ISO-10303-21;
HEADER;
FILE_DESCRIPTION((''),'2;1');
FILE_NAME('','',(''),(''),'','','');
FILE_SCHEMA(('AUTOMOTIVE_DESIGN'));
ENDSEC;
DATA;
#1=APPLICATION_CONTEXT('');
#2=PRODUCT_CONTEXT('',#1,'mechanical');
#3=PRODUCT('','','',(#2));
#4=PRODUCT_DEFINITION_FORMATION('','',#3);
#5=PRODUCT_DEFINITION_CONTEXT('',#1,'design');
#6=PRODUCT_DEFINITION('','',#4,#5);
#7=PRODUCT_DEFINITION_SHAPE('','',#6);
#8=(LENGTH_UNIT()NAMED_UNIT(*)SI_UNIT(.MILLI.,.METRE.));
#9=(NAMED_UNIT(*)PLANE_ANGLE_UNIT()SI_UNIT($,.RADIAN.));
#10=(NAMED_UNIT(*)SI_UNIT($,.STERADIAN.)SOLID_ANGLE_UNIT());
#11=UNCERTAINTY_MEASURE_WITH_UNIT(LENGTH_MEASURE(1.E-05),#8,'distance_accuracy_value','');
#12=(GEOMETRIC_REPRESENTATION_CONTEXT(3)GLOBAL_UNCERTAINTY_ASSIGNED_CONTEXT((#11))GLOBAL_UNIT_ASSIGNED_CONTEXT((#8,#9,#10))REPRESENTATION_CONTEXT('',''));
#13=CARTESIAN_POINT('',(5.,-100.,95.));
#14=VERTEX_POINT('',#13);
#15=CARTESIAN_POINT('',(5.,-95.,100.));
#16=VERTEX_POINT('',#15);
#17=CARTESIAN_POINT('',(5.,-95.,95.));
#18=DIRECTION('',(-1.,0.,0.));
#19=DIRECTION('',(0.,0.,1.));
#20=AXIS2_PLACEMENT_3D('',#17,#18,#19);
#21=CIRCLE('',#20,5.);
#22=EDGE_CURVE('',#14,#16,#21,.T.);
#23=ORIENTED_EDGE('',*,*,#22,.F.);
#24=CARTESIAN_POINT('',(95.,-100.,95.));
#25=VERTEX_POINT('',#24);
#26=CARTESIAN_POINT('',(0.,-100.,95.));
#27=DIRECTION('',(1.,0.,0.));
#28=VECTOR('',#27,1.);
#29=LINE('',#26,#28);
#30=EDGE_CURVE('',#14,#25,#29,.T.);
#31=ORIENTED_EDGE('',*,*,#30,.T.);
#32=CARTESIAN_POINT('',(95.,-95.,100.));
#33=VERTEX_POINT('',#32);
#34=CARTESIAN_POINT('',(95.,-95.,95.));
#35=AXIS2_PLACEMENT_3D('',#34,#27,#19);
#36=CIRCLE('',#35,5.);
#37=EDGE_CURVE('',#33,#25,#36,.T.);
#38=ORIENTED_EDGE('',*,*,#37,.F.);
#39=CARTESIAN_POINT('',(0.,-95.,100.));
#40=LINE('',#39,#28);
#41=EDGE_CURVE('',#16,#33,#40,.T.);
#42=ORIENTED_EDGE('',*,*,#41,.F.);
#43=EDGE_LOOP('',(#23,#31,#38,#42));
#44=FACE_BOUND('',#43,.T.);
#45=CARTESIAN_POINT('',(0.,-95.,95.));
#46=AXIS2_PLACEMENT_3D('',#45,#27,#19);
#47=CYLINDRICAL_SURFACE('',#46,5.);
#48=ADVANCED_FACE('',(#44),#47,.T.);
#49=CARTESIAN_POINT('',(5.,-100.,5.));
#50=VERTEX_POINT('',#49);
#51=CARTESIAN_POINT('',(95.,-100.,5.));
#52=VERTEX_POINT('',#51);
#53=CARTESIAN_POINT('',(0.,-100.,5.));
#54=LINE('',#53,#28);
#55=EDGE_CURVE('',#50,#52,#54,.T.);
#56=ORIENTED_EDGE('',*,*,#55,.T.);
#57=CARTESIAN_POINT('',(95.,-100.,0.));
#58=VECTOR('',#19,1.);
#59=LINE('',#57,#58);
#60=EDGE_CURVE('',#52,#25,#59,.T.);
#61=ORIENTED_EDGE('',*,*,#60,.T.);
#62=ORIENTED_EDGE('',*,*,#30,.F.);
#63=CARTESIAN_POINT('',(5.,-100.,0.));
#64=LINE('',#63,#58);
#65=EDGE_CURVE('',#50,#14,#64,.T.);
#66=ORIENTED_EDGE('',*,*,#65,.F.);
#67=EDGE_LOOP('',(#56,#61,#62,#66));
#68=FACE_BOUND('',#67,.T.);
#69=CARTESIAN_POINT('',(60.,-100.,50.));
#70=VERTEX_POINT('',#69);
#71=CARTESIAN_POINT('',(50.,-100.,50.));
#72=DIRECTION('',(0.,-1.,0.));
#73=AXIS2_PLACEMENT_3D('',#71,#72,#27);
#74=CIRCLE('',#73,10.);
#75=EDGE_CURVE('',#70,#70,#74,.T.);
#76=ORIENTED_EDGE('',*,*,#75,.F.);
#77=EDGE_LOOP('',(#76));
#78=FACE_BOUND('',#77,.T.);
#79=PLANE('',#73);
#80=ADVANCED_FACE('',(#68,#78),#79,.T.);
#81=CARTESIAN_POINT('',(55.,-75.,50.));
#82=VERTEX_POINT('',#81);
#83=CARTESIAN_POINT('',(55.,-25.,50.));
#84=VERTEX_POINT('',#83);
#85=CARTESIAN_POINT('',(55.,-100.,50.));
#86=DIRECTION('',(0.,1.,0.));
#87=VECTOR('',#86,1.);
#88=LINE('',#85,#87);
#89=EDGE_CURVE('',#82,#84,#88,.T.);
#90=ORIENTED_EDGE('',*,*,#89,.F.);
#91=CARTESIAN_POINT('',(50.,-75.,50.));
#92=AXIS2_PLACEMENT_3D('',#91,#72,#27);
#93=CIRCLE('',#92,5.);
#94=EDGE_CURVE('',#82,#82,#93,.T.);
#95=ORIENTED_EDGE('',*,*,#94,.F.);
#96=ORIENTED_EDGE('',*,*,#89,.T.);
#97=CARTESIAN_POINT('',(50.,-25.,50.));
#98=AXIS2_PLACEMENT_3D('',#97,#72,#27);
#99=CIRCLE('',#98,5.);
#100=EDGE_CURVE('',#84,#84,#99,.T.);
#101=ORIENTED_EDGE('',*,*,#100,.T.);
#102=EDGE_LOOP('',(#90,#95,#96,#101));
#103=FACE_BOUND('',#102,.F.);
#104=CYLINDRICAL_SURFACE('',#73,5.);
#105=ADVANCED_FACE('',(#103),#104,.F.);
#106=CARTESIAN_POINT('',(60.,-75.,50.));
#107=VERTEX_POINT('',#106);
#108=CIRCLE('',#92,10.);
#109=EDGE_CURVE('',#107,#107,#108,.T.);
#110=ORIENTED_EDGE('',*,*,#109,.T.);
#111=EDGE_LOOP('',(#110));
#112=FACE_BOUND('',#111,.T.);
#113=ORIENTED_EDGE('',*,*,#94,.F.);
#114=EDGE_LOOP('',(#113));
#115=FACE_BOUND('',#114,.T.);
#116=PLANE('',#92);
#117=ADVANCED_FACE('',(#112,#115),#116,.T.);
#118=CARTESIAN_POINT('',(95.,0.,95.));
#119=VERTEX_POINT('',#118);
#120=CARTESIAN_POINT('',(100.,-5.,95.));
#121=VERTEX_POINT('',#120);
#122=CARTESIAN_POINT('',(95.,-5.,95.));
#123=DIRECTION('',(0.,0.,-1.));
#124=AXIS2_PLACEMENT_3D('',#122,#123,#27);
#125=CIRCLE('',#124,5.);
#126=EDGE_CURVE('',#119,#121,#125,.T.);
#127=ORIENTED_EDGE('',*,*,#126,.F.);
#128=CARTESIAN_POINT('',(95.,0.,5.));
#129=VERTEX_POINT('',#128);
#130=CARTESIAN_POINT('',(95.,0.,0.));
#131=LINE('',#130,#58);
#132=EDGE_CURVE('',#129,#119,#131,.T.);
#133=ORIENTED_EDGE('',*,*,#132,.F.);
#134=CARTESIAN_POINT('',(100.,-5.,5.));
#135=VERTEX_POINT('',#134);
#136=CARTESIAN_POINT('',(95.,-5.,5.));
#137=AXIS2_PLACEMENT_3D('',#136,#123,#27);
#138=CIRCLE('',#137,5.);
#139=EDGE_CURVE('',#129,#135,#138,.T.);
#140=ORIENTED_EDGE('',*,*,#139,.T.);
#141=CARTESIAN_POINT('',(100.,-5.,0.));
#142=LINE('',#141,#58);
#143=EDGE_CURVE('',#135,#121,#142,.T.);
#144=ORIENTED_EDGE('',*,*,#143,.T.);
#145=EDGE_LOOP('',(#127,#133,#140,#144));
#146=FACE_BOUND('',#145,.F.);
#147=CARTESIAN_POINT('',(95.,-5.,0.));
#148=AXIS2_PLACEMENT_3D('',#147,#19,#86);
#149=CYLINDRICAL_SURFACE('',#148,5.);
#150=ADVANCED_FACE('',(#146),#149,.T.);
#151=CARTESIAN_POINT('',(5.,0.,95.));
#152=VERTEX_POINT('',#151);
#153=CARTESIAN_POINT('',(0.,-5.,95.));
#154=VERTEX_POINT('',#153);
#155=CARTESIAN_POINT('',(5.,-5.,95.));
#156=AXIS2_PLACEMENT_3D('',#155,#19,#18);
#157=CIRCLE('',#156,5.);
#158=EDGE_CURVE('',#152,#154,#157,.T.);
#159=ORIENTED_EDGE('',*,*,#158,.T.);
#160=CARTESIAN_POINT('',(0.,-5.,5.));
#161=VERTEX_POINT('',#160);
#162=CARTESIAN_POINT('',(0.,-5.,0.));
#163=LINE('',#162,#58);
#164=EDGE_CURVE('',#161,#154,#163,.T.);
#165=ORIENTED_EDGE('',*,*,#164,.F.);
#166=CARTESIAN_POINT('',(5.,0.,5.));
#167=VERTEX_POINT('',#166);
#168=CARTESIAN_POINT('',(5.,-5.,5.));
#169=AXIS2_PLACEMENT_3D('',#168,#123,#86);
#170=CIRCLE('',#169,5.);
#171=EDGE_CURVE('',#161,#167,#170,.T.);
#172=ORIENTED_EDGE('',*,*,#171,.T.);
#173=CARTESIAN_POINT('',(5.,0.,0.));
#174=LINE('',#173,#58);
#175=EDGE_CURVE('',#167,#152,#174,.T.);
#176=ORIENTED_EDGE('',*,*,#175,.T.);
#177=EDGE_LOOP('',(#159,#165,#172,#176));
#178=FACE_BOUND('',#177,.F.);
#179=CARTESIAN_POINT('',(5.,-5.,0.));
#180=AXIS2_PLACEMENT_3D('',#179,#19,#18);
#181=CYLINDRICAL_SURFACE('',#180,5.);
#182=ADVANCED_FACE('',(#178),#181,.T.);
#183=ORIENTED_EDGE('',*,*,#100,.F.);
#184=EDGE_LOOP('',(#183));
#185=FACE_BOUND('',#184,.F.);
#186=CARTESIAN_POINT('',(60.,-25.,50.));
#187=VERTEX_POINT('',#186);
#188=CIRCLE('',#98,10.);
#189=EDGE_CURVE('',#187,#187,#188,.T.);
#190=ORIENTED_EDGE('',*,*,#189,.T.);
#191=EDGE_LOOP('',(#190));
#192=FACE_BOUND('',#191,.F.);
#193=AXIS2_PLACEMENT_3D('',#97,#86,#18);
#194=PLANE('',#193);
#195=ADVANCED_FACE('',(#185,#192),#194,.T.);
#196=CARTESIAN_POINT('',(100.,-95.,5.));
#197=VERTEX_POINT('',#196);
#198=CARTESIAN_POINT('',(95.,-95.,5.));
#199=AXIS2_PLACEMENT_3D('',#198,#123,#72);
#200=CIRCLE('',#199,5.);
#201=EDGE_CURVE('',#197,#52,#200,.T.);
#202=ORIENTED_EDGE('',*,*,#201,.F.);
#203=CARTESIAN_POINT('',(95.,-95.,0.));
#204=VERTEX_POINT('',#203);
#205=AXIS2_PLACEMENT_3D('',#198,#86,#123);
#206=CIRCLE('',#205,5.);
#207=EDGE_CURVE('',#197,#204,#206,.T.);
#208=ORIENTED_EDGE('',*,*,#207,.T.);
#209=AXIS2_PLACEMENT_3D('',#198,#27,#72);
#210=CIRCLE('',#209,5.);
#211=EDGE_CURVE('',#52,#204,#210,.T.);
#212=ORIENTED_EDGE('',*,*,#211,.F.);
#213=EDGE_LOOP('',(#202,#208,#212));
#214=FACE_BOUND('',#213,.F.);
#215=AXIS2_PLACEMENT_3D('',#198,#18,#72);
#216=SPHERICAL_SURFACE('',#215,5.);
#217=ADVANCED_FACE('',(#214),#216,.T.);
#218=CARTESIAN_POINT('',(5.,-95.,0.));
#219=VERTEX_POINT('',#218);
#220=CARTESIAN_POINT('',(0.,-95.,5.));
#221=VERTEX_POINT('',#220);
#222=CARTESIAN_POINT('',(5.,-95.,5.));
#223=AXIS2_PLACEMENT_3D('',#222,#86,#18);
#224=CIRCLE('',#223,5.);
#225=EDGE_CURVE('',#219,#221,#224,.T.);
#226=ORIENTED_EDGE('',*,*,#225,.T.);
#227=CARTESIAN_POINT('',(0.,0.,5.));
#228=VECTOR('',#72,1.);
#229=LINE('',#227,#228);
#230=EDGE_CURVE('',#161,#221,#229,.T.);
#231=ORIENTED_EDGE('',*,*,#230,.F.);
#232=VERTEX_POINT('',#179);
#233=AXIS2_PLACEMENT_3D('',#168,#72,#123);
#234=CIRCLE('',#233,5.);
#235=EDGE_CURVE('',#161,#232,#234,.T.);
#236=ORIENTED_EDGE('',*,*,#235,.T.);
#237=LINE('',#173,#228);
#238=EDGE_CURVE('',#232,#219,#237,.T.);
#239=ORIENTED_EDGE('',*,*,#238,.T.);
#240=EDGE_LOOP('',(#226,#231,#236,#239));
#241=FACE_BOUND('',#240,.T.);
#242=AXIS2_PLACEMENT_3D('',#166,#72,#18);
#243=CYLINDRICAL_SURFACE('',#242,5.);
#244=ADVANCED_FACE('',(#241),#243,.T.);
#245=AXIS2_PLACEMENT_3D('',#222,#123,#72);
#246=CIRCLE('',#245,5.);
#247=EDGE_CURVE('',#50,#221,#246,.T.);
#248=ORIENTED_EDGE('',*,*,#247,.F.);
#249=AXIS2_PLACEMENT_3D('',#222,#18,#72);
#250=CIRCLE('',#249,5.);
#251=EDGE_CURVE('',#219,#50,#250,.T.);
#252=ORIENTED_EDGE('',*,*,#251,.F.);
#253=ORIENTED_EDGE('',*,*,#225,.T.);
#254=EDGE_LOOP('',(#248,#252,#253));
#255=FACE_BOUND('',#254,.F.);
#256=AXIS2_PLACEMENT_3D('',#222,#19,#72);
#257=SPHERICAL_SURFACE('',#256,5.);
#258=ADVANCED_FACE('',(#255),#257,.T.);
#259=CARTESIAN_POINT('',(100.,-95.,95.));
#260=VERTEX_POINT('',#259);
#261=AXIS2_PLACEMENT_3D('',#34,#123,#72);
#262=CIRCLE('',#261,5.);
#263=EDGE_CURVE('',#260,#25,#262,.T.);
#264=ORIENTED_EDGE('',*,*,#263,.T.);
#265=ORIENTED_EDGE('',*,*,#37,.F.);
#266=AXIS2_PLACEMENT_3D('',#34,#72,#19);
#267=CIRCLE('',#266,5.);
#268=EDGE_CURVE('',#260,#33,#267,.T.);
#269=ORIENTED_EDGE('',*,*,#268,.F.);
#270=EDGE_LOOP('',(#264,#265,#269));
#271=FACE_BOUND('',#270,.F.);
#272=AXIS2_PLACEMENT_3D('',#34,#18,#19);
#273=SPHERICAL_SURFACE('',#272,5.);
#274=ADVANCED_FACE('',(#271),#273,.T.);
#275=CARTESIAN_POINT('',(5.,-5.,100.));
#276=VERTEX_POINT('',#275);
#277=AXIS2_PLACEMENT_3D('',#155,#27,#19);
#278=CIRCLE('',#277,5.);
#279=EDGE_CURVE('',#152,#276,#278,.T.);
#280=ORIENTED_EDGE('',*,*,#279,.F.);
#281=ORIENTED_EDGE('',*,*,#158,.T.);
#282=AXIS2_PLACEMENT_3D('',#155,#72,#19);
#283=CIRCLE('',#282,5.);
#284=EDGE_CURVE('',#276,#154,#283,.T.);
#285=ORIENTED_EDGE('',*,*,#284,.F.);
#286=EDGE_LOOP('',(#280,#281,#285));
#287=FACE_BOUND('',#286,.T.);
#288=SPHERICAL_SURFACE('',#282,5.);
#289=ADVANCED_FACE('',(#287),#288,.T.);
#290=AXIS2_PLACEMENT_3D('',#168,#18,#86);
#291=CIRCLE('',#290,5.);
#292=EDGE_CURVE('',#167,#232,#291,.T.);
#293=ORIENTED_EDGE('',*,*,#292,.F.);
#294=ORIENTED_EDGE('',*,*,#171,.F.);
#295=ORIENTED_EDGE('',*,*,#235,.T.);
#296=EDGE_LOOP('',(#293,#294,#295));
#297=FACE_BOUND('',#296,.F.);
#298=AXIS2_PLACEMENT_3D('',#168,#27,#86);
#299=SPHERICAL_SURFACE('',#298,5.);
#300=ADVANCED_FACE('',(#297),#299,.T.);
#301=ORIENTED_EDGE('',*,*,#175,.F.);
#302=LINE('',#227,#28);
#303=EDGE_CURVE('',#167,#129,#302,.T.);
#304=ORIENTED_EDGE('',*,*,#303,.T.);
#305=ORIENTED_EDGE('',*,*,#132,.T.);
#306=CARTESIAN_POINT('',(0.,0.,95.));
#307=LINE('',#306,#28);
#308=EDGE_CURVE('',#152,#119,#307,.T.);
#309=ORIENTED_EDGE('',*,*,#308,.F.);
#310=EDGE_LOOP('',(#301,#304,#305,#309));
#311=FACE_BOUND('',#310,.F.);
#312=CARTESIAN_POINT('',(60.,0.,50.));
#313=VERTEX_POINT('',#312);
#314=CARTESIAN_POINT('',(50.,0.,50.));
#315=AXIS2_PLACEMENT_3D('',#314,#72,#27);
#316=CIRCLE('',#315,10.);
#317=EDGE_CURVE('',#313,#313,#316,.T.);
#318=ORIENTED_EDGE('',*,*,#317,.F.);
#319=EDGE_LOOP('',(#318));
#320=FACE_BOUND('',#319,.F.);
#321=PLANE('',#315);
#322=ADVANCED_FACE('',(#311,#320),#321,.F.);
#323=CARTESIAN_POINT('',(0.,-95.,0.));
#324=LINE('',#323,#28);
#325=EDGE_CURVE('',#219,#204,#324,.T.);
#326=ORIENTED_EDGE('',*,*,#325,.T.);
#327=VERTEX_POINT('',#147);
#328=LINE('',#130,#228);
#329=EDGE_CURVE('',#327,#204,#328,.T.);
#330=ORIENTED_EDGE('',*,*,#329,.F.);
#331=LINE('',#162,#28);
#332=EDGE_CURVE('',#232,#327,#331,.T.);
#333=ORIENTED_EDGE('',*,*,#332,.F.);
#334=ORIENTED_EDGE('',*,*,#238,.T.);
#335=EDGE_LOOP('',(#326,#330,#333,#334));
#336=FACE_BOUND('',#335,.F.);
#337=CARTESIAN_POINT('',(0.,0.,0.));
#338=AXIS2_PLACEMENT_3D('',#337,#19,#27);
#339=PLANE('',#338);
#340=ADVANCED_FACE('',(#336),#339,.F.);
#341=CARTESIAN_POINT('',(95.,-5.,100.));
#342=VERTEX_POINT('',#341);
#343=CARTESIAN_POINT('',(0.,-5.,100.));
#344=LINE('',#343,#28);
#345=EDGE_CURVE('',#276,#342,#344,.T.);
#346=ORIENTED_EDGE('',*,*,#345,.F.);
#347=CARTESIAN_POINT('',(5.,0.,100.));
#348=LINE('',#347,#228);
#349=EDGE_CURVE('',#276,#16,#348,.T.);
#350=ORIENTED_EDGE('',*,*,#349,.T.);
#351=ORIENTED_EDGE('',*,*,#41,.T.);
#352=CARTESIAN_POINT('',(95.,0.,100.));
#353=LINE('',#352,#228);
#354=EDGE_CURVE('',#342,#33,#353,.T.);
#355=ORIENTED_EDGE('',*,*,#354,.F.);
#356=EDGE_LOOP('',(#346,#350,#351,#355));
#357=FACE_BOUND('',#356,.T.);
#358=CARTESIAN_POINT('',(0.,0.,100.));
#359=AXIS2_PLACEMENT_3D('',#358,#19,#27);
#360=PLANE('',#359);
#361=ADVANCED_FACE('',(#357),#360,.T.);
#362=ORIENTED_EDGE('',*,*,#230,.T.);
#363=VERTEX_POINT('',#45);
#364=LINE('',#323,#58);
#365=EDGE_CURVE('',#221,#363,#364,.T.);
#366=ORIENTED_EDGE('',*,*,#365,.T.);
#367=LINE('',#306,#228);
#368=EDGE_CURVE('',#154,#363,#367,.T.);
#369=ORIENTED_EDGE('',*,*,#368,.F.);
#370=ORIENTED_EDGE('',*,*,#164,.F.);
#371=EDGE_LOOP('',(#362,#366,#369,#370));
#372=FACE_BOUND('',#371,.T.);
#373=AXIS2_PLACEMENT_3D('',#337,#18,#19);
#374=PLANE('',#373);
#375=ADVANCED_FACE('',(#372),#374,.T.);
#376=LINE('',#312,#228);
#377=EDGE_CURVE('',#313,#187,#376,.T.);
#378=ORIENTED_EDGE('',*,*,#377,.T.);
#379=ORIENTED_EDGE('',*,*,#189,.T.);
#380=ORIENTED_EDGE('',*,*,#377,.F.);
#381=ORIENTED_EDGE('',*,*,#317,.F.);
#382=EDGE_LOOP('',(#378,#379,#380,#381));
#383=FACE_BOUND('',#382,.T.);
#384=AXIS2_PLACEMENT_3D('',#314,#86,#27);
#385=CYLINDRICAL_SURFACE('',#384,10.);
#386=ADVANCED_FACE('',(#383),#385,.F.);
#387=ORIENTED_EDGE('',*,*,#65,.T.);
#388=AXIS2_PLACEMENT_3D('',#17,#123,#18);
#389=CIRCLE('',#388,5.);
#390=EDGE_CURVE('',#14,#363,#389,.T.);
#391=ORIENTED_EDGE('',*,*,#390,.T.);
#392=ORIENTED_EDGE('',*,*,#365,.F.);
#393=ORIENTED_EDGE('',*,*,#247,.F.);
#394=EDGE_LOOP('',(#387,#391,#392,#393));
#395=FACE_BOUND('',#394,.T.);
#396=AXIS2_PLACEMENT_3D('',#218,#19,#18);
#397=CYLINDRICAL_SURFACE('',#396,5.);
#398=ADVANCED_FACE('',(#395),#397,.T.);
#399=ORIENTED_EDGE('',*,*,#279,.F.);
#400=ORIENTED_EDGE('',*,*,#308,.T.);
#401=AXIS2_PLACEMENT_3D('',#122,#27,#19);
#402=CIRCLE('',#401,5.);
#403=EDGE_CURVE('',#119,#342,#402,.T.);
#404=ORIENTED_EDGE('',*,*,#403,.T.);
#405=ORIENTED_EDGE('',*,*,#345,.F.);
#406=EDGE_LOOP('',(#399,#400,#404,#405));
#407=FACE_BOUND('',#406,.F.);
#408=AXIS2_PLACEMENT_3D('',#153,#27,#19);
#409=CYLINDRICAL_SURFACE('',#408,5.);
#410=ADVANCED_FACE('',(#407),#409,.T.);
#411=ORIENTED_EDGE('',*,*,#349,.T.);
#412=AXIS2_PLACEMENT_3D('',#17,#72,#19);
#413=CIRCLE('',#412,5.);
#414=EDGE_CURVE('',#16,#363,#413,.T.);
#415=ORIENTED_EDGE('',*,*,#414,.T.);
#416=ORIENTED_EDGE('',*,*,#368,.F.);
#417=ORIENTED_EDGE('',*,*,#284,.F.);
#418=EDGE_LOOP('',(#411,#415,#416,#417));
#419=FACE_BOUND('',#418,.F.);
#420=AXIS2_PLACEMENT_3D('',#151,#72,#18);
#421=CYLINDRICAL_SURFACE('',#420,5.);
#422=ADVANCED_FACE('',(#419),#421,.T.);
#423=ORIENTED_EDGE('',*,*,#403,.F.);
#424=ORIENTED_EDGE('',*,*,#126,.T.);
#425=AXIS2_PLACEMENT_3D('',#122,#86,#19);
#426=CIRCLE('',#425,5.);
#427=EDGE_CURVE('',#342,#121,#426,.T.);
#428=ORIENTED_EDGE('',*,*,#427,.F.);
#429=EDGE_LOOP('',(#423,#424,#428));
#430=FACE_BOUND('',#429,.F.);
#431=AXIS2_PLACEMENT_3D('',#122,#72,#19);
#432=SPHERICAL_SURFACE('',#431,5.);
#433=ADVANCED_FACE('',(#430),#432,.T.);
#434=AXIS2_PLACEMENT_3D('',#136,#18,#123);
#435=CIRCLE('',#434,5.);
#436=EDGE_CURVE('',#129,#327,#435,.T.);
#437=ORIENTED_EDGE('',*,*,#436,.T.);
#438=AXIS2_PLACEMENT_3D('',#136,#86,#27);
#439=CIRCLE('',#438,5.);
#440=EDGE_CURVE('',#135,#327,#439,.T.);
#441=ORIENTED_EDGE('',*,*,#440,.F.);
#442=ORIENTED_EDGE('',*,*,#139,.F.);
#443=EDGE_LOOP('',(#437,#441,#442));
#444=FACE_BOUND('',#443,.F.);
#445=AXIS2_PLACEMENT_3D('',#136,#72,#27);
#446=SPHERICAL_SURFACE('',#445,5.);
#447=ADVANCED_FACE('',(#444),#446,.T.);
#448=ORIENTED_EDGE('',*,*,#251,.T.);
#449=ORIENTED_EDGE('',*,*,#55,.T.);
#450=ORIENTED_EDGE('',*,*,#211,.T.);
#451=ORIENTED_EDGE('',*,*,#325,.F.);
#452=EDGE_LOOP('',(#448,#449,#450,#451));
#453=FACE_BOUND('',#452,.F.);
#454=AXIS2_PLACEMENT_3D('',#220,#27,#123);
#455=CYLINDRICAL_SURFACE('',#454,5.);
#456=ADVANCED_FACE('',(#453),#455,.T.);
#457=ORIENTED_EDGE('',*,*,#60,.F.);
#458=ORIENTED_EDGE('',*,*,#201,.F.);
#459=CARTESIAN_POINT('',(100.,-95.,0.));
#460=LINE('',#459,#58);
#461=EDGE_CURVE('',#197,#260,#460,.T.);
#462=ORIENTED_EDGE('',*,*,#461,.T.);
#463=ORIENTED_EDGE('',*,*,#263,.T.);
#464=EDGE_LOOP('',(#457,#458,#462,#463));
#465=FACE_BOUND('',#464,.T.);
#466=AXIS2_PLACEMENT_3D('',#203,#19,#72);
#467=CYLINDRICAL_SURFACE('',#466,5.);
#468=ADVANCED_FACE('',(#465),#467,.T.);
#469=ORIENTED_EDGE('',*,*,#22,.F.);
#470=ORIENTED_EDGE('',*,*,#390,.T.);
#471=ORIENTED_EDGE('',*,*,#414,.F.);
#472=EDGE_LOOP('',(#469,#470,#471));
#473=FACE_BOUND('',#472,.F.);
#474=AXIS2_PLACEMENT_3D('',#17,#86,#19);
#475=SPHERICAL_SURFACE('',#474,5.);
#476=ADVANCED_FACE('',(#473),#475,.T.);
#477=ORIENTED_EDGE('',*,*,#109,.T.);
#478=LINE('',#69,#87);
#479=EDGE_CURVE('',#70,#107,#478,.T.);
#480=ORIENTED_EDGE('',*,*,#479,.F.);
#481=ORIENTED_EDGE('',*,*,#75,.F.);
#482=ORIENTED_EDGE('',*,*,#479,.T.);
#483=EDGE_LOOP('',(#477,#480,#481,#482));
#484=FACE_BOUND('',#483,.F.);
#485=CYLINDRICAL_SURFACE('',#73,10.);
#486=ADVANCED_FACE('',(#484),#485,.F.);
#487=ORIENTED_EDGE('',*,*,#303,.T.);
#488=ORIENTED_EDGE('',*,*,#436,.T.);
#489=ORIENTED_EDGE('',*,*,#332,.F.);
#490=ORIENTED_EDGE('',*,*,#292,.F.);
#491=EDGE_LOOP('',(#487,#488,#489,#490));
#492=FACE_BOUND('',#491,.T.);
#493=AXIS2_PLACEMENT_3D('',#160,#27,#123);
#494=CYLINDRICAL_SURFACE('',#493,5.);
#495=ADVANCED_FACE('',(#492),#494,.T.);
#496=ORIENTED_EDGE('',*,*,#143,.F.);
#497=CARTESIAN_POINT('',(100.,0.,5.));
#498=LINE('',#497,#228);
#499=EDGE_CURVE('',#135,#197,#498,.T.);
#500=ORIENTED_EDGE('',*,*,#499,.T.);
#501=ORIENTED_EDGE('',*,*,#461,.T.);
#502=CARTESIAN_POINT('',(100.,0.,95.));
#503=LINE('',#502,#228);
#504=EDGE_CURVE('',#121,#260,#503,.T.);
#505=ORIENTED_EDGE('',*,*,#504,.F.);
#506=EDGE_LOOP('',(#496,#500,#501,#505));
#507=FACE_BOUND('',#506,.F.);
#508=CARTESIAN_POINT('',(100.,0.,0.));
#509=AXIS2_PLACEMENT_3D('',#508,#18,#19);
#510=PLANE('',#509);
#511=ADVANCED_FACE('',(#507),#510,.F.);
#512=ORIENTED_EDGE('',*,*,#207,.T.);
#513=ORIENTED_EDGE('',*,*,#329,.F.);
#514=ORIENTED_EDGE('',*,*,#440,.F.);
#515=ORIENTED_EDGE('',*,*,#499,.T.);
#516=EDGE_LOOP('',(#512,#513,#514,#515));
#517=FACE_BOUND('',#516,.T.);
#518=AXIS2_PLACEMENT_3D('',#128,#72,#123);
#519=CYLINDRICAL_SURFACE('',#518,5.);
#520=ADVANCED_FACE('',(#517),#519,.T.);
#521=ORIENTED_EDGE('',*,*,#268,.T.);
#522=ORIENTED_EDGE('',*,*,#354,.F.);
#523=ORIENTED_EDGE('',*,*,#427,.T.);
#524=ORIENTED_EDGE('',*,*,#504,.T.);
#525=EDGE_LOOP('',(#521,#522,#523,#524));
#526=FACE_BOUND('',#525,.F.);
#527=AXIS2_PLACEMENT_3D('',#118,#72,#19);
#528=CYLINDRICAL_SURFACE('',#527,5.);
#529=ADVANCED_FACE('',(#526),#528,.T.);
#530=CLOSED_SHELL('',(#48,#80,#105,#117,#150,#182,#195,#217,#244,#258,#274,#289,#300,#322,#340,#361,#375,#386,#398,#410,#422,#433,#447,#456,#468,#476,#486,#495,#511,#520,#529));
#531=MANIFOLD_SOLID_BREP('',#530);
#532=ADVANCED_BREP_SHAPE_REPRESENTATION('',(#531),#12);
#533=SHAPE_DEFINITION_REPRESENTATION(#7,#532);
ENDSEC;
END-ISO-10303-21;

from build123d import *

# Parameters (mm, degrees)
F0_W     = 100
F0_H     = 100
F1_DEPTH = 100
F2_R     = 5
F3_DEPTH = 100
F5_R     = 10
F6_DEPTH = 25
F7_R     = 5


# Not quite as in the source:
# - a pattern or mirror of a feature is missing from the dataset's text; its kind, count and spacing are read off the source's solid


with BuildPart() as f1:
    # F0 (on Front) → F1 (new body)
    with BuildSketch(Plane.XZ):
        with Locations((50, 50)):
            Rectangle(F0_W, F0_H)
    extrude(amount=F1_DEPTH)

    # F2 (on face) → F3 (cut)
    with BuildSketch(Plane.XZ.offset(100)):
        with Locations((50, 50)):
            Circle(F2_R)
    extrude(amount=-F3_DEPTH, mode=Mode.SUBTRACT)

    # F5 (on face) → F6 (cut)
    with BuildSketch(Plane.XZ.offset(100)):
        with Locations((50, 50)):
            Circle(F5_R)
    f6 = extrude(amount=-F6_DEPTH, mode=Mode.SUBTRACT)

    # F6_copies: F6 across plane
    add(f6.mirror(Plane.ZX.offset(-50)), mode=Mode.SUBTRACT)

    # F7
    f7_edges = [f1.edges().sort_by_distance(p)[0] for p in [
        (0, -50, 100),
        (50, -100, 100),
        (100, -50, 100),
        (50, 0, 100),
        (0, -100, 50),
        (50, -100, 0),
        (100, -100, 50),
        (100, -50, 0),
        (100, 0, 50),
        (50, 0, 0),
        (0, 0, 50),
        (0, -50, 0),
    ]]
    fillet(f7_edges, radius=F7_R)


solid = f1.part
